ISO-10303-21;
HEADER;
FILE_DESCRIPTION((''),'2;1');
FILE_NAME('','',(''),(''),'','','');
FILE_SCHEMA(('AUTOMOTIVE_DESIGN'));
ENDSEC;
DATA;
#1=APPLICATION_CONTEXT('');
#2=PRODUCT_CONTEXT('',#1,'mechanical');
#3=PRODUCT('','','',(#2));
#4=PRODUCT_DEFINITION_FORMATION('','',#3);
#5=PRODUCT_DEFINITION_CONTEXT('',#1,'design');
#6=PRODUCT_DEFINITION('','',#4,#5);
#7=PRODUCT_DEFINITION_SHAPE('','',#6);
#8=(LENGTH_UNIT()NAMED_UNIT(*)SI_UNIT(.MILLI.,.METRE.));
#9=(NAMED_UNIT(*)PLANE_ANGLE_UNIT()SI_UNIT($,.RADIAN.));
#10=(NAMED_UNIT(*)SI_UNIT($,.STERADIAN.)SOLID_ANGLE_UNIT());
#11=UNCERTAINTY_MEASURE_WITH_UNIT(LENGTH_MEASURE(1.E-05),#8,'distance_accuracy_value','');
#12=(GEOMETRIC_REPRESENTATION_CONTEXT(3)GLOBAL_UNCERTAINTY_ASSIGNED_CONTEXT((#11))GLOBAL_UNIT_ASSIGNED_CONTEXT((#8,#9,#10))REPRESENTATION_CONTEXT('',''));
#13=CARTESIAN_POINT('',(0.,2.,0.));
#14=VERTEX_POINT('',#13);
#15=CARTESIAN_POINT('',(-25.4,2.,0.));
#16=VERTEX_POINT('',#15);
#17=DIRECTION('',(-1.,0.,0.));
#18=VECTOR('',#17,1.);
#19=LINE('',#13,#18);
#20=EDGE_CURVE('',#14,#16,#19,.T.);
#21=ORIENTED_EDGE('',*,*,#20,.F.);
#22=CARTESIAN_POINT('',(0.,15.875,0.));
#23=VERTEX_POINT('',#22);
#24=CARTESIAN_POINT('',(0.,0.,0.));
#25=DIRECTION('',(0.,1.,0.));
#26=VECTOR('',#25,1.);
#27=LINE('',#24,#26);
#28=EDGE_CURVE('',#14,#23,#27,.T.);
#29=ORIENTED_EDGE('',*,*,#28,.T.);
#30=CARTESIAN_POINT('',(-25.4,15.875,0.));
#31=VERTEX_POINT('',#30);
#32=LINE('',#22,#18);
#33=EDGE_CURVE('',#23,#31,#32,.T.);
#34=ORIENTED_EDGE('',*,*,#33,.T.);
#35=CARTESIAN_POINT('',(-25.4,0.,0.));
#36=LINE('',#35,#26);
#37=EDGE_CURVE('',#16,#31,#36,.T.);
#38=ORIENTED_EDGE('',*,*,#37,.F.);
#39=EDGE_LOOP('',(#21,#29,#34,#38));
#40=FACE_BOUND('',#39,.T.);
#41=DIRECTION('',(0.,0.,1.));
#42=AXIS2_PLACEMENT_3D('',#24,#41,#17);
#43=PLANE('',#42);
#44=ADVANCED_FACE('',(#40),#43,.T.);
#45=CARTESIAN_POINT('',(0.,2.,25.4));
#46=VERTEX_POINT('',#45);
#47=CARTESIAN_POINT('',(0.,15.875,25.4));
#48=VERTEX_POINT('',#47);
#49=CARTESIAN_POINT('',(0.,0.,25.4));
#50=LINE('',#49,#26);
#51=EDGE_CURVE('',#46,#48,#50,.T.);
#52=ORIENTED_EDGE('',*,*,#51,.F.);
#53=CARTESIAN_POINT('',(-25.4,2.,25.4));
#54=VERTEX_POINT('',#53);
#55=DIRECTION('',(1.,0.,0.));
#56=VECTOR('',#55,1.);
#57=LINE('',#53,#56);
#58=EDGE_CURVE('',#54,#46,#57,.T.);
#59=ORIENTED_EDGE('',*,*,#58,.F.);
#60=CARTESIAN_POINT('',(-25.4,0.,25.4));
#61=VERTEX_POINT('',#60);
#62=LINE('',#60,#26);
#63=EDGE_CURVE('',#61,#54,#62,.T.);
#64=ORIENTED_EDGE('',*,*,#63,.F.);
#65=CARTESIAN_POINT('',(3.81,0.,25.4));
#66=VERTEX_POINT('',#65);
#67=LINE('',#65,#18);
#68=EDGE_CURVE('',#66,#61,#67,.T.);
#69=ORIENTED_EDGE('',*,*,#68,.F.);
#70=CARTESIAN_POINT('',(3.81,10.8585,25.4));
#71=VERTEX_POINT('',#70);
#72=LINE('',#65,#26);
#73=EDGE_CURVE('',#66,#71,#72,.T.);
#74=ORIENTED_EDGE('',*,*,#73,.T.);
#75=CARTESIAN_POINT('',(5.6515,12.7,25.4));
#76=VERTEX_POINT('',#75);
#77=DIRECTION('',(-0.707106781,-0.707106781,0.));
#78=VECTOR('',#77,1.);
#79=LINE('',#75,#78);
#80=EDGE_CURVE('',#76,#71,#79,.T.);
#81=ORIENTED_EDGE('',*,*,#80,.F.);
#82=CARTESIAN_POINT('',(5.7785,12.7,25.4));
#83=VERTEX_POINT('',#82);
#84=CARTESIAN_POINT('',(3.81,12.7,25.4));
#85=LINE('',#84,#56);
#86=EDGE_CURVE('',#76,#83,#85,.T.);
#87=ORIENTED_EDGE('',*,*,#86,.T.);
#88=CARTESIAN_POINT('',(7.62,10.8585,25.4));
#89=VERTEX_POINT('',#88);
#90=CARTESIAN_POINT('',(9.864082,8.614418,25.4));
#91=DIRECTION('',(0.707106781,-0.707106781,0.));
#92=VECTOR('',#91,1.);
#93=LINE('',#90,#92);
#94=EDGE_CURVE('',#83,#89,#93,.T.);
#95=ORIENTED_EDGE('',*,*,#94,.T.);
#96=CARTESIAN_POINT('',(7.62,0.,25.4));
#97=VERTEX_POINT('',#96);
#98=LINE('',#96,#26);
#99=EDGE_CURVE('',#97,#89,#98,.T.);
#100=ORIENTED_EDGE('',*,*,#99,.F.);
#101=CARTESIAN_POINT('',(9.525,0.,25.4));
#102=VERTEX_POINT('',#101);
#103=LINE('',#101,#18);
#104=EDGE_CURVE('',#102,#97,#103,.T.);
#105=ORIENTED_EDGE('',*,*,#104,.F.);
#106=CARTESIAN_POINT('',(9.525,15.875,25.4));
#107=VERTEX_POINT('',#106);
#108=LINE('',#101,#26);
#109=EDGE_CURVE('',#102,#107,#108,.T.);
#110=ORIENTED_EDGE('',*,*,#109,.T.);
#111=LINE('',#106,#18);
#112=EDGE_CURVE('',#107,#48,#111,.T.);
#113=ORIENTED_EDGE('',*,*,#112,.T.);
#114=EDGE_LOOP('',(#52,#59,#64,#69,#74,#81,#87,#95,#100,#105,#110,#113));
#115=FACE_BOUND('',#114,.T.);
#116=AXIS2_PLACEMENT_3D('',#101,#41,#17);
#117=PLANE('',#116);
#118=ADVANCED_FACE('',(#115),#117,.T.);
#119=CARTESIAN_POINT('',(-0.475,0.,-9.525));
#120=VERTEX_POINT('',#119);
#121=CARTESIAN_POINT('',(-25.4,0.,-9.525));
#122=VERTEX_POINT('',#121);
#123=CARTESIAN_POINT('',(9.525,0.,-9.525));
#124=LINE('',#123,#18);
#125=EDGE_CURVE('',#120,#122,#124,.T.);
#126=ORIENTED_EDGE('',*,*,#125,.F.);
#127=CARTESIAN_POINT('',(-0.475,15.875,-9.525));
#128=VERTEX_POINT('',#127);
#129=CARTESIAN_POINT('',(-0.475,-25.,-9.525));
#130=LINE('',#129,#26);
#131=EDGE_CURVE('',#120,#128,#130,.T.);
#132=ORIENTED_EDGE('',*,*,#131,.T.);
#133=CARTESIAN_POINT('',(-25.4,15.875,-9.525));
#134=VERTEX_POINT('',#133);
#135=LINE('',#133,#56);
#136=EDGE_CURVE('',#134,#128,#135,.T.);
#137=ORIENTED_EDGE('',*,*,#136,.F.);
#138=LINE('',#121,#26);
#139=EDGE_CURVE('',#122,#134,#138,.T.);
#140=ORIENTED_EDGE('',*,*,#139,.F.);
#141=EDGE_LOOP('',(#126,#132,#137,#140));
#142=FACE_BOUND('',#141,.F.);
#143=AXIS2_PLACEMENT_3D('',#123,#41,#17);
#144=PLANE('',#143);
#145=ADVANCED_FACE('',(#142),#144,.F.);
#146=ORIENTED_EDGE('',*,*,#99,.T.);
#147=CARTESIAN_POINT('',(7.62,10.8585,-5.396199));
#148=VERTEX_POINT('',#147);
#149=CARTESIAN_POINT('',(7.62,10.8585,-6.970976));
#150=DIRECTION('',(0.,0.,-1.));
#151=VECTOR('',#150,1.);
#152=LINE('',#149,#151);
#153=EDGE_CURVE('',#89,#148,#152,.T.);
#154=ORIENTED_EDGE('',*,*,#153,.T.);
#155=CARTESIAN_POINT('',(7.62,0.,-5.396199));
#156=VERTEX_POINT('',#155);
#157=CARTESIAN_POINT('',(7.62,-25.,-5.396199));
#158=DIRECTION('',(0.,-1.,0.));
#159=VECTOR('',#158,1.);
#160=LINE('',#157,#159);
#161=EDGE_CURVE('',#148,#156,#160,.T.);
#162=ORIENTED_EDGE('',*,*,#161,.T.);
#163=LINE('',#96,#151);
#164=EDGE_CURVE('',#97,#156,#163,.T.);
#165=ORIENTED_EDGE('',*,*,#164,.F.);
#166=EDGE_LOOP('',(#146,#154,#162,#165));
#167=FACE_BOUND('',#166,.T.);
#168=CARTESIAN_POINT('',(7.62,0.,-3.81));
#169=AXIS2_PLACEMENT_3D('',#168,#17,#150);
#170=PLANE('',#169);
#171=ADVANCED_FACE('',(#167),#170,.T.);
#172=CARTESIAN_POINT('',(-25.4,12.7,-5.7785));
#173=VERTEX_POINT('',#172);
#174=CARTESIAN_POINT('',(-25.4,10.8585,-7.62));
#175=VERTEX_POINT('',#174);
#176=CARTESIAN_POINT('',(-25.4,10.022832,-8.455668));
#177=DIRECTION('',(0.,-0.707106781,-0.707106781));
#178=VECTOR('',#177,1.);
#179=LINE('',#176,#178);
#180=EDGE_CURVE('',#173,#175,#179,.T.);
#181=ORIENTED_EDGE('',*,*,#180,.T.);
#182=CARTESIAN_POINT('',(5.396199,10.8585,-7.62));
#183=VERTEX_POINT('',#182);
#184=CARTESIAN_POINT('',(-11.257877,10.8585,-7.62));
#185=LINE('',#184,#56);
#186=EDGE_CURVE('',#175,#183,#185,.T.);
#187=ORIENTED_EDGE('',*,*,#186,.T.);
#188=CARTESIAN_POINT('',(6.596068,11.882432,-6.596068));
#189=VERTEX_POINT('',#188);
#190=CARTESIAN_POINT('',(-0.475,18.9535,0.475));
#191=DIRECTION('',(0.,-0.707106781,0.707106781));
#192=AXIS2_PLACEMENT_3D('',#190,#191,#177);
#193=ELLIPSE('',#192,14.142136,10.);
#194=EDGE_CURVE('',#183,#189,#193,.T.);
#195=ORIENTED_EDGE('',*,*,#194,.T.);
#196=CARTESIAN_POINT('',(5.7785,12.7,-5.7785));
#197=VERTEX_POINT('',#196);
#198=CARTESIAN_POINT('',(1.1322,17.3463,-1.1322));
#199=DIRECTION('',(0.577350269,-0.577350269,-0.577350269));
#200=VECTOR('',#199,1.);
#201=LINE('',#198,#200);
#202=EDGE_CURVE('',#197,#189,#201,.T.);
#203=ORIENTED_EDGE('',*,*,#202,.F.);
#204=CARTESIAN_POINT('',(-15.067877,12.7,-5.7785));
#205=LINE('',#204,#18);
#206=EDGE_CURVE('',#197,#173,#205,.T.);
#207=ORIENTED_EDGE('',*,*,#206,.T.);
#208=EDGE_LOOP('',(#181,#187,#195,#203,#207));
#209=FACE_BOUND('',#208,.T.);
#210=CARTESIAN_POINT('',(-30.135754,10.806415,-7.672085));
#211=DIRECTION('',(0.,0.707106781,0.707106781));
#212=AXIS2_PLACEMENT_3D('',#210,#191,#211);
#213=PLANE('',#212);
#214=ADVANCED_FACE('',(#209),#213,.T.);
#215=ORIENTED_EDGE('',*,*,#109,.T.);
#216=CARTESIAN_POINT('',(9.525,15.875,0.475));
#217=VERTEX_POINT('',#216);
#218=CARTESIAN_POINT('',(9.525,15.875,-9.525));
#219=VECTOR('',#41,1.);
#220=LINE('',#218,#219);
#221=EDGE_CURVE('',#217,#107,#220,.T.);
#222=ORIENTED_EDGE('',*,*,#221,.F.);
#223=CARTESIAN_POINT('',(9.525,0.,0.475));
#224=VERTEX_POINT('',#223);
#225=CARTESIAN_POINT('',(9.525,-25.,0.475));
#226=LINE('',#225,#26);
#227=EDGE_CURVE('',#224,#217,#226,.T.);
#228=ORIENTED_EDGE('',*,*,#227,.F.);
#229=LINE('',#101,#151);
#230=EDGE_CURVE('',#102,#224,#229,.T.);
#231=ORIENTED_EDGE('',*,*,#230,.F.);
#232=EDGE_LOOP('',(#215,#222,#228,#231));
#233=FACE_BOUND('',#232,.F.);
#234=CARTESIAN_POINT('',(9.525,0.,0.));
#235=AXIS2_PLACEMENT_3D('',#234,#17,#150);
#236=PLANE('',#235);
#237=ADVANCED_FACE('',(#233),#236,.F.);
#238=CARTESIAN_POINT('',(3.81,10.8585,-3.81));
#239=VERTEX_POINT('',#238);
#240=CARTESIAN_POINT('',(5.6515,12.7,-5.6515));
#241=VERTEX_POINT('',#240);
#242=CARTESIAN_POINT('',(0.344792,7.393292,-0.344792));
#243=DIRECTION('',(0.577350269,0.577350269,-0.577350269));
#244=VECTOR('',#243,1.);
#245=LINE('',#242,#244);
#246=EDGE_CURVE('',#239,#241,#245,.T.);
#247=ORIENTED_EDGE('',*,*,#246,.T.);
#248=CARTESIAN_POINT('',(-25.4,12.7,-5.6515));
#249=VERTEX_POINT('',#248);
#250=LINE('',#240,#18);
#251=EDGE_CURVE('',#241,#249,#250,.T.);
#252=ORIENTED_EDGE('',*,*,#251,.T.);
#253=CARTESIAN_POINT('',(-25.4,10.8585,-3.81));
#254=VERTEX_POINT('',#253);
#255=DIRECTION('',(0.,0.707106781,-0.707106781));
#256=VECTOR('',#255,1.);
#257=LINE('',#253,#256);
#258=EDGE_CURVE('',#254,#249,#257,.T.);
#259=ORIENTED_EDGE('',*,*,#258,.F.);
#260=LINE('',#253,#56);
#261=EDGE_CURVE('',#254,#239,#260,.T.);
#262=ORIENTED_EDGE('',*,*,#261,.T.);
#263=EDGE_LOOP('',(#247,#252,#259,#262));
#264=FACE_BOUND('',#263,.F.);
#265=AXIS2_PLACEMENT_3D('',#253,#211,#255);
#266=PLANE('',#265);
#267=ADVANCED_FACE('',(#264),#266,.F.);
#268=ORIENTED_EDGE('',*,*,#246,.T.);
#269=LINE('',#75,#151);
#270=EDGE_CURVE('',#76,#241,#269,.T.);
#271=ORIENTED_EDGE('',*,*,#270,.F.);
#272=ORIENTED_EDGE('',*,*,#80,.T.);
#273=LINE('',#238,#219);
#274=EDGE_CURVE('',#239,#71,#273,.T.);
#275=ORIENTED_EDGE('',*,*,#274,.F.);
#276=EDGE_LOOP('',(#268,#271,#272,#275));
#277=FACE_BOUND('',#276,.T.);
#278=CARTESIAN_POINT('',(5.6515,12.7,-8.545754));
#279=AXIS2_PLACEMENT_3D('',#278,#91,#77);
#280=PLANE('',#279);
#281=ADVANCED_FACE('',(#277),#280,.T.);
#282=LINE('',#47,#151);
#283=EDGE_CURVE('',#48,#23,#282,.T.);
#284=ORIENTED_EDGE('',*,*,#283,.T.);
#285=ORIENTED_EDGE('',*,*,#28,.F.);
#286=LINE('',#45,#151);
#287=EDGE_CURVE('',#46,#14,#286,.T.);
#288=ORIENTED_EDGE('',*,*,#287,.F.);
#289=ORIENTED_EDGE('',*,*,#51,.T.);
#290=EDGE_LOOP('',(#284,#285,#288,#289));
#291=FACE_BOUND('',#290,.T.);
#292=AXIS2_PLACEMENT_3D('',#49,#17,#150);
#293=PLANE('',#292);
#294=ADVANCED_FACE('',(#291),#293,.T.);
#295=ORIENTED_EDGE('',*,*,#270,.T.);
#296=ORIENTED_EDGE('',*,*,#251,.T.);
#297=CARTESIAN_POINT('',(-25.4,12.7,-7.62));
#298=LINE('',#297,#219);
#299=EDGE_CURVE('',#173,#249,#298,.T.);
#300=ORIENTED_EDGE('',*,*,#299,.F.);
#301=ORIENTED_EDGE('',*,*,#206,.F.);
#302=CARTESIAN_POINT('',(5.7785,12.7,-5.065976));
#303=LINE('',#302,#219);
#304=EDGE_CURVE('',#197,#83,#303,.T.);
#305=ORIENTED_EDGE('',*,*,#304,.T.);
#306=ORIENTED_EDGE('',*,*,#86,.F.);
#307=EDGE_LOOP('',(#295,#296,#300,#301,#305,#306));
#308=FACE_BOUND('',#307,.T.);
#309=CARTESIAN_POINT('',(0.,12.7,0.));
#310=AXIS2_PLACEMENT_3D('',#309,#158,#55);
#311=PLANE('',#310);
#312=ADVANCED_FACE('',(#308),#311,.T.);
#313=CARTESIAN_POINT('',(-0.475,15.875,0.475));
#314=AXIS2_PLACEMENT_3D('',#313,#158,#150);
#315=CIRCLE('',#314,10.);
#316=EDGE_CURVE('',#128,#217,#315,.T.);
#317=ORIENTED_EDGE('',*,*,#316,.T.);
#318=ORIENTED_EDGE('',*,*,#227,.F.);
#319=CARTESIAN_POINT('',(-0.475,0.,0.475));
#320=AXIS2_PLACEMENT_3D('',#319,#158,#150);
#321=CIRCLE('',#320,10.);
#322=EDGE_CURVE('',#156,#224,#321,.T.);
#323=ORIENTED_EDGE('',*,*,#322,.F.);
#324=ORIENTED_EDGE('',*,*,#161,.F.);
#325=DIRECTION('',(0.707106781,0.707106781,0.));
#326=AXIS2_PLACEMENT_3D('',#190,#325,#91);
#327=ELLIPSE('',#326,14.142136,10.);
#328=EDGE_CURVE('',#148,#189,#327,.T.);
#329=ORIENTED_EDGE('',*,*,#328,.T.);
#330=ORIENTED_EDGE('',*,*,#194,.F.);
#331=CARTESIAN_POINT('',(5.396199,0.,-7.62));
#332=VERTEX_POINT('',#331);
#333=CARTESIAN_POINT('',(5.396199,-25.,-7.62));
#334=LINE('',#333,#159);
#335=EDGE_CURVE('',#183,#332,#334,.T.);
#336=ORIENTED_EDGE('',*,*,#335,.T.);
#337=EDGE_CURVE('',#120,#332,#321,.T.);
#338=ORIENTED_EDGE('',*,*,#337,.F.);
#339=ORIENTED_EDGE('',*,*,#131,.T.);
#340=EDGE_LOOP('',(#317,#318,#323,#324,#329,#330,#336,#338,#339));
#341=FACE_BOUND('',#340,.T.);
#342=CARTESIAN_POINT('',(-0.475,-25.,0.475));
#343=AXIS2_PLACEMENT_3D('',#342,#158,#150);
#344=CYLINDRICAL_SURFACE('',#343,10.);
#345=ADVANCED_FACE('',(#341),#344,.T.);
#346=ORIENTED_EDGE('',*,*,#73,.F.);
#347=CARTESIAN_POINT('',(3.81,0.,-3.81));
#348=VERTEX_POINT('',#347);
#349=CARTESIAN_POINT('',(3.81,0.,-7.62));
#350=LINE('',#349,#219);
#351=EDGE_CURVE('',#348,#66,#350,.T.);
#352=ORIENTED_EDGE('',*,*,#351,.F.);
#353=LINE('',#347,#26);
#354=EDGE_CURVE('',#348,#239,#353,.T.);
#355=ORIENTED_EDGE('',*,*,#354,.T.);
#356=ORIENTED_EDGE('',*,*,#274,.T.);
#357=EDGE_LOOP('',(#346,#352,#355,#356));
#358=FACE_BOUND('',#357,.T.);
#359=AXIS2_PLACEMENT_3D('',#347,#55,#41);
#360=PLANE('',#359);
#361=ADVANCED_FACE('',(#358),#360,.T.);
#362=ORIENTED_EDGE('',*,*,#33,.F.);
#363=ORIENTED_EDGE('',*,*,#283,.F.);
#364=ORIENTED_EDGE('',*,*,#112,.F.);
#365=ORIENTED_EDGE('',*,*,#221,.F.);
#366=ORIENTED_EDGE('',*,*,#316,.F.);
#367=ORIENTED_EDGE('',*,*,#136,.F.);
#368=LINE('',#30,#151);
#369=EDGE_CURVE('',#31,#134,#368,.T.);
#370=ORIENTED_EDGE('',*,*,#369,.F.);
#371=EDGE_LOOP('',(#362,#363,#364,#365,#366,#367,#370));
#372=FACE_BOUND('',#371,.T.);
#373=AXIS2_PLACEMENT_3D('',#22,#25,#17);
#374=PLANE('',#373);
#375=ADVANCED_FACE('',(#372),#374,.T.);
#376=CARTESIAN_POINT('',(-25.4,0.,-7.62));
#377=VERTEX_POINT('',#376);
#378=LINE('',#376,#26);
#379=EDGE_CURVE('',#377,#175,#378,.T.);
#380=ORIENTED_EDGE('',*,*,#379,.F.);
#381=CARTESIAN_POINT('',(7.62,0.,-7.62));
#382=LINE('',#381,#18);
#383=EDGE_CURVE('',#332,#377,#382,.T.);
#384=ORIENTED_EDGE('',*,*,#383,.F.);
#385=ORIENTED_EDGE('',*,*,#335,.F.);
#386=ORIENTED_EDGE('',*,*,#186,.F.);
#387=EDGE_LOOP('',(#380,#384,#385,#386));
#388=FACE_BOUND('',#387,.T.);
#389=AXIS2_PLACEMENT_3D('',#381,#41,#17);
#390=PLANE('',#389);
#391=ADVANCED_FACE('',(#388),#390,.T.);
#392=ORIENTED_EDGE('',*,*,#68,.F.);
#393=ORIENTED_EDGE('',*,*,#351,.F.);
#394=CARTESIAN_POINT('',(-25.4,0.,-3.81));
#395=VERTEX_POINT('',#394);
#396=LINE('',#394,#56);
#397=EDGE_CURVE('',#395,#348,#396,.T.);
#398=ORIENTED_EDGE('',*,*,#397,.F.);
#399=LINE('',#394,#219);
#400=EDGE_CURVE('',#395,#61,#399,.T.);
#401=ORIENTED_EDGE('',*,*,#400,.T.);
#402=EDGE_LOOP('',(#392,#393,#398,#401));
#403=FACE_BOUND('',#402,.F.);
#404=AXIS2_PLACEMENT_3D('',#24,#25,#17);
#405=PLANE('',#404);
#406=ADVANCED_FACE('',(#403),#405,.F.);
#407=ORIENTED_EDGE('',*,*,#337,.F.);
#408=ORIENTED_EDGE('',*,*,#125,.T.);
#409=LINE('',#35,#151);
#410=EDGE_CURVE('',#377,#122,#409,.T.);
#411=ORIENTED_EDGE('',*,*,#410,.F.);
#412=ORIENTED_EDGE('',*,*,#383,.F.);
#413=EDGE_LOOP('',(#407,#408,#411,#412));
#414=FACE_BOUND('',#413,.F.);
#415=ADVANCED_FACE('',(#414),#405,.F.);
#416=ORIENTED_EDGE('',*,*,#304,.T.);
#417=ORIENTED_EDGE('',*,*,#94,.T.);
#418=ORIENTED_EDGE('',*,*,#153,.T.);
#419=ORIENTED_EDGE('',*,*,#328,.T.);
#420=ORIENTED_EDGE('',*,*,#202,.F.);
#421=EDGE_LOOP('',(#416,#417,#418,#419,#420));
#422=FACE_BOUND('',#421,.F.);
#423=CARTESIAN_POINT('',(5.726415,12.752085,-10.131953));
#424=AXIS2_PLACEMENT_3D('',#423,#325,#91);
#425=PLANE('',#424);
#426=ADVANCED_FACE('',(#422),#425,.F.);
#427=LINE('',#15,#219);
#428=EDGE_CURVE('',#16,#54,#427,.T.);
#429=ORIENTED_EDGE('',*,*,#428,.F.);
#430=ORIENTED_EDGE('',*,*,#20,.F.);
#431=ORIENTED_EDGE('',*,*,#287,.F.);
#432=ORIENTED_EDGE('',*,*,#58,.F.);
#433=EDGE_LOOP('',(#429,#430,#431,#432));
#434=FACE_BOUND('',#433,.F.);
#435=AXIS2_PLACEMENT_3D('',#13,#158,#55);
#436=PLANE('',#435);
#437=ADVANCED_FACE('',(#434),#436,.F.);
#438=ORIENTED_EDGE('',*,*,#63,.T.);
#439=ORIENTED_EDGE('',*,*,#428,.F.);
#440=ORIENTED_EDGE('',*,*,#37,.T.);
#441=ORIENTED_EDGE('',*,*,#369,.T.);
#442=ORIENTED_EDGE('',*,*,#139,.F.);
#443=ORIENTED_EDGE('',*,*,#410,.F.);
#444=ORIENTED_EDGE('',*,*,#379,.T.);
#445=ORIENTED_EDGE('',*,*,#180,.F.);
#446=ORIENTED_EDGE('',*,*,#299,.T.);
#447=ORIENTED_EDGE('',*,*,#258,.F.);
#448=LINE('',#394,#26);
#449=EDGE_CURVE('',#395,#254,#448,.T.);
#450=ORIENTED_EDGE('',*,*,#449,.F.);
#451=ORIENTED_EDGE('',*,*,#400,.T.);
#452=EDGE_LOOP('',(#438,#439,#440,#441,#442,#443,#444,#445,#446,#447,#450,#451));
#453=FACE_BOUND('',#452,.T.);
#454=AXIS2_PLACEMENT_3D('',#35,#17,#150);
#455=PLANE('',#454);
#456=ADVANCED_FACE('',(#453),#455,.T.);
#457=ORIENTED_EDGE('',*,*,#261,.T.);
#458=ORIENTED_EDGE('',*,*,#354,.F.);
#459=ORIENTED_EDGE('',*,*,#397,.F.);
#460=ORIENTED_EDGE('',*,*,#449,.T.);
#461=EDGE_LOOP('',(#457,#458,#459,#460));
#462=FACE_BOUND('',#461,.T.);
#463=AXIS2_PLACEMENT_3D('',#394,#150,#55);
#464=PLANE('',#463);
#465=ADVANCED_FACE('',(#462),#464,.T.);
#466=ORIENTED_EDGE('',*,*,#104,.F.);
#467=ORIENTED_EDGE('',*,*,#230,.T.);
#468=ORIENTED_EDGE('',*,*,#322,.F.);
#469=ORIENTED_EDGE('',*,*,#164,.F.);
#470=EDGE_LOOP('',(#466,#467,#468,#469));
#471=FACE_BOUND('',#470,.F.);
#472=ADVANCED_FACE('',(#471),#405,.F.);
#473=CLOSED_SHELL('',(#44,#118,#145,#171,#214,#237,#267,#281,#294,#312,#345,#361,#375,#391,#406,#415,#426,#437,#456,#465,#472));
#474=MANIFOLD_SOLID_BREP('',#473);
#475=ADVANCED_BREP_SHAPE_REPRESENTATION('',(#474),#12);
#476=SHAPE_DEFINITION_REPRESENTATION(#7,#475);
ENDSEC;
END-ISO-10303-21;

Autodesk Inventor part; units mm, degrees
ref_plane "YZ Plane" through (0, 0, 0) normal (1, 0, 0) x (0, 1, 0)
ref_plane "XZ Plane" through (0, 0, 0) normal (0, 1, 0) x (-1, 0, 0)
ref_plane "XY Plane" through (0, 0, 0) normal (0, 0, 1) x (1, 0, 0)
sketch "Sketch1" plane through (0, 0, 0) normal (0, 1, 0) x (-1, 0, 0)
  line L0 (0, 0) -> (-9.525, 0)
  line L1 (-9.525, 0) -> (-9.525, -9.525)
  line L2 (-9.525, -9.525) -> (0, -9.525)
  line L3 (0, -9.525) -> (0, 0)
  line L4 (0, 0) -> (25.4, 0)
  line L5 (25.4, 0) -> (25.4, -9.525)
  line L6 (25.4, -9.525) -> (0, -9.525)
  line L7 (0, -9.525) -> (0, 0)
  line L8 (0, 0) -> (-9.525, 0)
  line L9 (-9.525, 0) -> (-9.525, 25.4)
  line L10 (-9.525, 25.4) -> (0, 25.4)
  line L11 (0, 25.4) -> (0, 0)
  dimension "d0" = 9.525
  dimension "d1" = 9.525
  dimension "d2" = 25.4
  dimension "d3" = 9.525
  dimension "d4" = 9.525
  dimension "d5" = 25.4
extrude "Extrusion1" add sketch "Sketch1" along normal blind 15.875
sketch "Sketch2" plane through (0, 0, 0) normal (0, -1, 0) x (1, 0, 0)
  line L0 (0, 0) -> (7.62, 0) construction
  line L1 (7.62, 0) -> (7.62, -7.62) construction
  line L2 (7.62, -7.62) -> (0, -7.62) construction
  line L3 (0, -7.62) -> (0, 0) construction
  line L4 (7.62, -7.62) -> (3.81, -7.62)
  line L5 (3.81, -7.62) -> (3.81, 25.4)
  line L6 (3.81, 25.4) -> (7.62, 25.4)
  line L7 (7.62, 25.4) -> (7.62, -7.62)
  line L8 (7.62, -7.62) -> (-25.4, -7.62)
  line L9 (-25.4, -7.62) -> (-25.4, -3.81)
  line L10 (-25.4, -3.81) -> (7.62, -3.81)
  line L11 (7.62, -3.81) -> (7.62, -7.62)
  dimension "d8" = 7.62
  dimension "d9" = 7.62
  dimension "d10" = 3.81
  dimension "d11" = 33.02
  dimension "d12" = 33.02
  dimension "d13" = 3.81
extrude "Extrusion2" cut sketch "Sketch2" against normal blind 12.7
fillet "Fillet1" radius 10 1 edges at (9.525, 7.9375, -9.525)
chamfer "Chamfer1" distance 1.8415 angle 45 4 edges at (7.62, 12.7, 10.0019) (3.81, 12.7, 10.795) (-10.795, 12.7, -3.81) (-10.0019, 12.7, -7.62)
sketch "Sketch3" plane through (0, 0, 0) normal (0, -1, 0) x (1, 0, 0)
  line L0 (0, 0) -> (-25.4, 0)
  line L1 (-25.4, 0) -> (-25.4, 25.4)
  line L2 (-25.4, 25.4) -> (0, 25.4)
  line L3 (0, 25.4) -> (0, 0)
  dimension "d20" = 25.4
  dimension "d21" = 25.4
extrude "Extrusion3" add sketch "Sketch3" against normal blind 2
properties part number "Corner Piece"
